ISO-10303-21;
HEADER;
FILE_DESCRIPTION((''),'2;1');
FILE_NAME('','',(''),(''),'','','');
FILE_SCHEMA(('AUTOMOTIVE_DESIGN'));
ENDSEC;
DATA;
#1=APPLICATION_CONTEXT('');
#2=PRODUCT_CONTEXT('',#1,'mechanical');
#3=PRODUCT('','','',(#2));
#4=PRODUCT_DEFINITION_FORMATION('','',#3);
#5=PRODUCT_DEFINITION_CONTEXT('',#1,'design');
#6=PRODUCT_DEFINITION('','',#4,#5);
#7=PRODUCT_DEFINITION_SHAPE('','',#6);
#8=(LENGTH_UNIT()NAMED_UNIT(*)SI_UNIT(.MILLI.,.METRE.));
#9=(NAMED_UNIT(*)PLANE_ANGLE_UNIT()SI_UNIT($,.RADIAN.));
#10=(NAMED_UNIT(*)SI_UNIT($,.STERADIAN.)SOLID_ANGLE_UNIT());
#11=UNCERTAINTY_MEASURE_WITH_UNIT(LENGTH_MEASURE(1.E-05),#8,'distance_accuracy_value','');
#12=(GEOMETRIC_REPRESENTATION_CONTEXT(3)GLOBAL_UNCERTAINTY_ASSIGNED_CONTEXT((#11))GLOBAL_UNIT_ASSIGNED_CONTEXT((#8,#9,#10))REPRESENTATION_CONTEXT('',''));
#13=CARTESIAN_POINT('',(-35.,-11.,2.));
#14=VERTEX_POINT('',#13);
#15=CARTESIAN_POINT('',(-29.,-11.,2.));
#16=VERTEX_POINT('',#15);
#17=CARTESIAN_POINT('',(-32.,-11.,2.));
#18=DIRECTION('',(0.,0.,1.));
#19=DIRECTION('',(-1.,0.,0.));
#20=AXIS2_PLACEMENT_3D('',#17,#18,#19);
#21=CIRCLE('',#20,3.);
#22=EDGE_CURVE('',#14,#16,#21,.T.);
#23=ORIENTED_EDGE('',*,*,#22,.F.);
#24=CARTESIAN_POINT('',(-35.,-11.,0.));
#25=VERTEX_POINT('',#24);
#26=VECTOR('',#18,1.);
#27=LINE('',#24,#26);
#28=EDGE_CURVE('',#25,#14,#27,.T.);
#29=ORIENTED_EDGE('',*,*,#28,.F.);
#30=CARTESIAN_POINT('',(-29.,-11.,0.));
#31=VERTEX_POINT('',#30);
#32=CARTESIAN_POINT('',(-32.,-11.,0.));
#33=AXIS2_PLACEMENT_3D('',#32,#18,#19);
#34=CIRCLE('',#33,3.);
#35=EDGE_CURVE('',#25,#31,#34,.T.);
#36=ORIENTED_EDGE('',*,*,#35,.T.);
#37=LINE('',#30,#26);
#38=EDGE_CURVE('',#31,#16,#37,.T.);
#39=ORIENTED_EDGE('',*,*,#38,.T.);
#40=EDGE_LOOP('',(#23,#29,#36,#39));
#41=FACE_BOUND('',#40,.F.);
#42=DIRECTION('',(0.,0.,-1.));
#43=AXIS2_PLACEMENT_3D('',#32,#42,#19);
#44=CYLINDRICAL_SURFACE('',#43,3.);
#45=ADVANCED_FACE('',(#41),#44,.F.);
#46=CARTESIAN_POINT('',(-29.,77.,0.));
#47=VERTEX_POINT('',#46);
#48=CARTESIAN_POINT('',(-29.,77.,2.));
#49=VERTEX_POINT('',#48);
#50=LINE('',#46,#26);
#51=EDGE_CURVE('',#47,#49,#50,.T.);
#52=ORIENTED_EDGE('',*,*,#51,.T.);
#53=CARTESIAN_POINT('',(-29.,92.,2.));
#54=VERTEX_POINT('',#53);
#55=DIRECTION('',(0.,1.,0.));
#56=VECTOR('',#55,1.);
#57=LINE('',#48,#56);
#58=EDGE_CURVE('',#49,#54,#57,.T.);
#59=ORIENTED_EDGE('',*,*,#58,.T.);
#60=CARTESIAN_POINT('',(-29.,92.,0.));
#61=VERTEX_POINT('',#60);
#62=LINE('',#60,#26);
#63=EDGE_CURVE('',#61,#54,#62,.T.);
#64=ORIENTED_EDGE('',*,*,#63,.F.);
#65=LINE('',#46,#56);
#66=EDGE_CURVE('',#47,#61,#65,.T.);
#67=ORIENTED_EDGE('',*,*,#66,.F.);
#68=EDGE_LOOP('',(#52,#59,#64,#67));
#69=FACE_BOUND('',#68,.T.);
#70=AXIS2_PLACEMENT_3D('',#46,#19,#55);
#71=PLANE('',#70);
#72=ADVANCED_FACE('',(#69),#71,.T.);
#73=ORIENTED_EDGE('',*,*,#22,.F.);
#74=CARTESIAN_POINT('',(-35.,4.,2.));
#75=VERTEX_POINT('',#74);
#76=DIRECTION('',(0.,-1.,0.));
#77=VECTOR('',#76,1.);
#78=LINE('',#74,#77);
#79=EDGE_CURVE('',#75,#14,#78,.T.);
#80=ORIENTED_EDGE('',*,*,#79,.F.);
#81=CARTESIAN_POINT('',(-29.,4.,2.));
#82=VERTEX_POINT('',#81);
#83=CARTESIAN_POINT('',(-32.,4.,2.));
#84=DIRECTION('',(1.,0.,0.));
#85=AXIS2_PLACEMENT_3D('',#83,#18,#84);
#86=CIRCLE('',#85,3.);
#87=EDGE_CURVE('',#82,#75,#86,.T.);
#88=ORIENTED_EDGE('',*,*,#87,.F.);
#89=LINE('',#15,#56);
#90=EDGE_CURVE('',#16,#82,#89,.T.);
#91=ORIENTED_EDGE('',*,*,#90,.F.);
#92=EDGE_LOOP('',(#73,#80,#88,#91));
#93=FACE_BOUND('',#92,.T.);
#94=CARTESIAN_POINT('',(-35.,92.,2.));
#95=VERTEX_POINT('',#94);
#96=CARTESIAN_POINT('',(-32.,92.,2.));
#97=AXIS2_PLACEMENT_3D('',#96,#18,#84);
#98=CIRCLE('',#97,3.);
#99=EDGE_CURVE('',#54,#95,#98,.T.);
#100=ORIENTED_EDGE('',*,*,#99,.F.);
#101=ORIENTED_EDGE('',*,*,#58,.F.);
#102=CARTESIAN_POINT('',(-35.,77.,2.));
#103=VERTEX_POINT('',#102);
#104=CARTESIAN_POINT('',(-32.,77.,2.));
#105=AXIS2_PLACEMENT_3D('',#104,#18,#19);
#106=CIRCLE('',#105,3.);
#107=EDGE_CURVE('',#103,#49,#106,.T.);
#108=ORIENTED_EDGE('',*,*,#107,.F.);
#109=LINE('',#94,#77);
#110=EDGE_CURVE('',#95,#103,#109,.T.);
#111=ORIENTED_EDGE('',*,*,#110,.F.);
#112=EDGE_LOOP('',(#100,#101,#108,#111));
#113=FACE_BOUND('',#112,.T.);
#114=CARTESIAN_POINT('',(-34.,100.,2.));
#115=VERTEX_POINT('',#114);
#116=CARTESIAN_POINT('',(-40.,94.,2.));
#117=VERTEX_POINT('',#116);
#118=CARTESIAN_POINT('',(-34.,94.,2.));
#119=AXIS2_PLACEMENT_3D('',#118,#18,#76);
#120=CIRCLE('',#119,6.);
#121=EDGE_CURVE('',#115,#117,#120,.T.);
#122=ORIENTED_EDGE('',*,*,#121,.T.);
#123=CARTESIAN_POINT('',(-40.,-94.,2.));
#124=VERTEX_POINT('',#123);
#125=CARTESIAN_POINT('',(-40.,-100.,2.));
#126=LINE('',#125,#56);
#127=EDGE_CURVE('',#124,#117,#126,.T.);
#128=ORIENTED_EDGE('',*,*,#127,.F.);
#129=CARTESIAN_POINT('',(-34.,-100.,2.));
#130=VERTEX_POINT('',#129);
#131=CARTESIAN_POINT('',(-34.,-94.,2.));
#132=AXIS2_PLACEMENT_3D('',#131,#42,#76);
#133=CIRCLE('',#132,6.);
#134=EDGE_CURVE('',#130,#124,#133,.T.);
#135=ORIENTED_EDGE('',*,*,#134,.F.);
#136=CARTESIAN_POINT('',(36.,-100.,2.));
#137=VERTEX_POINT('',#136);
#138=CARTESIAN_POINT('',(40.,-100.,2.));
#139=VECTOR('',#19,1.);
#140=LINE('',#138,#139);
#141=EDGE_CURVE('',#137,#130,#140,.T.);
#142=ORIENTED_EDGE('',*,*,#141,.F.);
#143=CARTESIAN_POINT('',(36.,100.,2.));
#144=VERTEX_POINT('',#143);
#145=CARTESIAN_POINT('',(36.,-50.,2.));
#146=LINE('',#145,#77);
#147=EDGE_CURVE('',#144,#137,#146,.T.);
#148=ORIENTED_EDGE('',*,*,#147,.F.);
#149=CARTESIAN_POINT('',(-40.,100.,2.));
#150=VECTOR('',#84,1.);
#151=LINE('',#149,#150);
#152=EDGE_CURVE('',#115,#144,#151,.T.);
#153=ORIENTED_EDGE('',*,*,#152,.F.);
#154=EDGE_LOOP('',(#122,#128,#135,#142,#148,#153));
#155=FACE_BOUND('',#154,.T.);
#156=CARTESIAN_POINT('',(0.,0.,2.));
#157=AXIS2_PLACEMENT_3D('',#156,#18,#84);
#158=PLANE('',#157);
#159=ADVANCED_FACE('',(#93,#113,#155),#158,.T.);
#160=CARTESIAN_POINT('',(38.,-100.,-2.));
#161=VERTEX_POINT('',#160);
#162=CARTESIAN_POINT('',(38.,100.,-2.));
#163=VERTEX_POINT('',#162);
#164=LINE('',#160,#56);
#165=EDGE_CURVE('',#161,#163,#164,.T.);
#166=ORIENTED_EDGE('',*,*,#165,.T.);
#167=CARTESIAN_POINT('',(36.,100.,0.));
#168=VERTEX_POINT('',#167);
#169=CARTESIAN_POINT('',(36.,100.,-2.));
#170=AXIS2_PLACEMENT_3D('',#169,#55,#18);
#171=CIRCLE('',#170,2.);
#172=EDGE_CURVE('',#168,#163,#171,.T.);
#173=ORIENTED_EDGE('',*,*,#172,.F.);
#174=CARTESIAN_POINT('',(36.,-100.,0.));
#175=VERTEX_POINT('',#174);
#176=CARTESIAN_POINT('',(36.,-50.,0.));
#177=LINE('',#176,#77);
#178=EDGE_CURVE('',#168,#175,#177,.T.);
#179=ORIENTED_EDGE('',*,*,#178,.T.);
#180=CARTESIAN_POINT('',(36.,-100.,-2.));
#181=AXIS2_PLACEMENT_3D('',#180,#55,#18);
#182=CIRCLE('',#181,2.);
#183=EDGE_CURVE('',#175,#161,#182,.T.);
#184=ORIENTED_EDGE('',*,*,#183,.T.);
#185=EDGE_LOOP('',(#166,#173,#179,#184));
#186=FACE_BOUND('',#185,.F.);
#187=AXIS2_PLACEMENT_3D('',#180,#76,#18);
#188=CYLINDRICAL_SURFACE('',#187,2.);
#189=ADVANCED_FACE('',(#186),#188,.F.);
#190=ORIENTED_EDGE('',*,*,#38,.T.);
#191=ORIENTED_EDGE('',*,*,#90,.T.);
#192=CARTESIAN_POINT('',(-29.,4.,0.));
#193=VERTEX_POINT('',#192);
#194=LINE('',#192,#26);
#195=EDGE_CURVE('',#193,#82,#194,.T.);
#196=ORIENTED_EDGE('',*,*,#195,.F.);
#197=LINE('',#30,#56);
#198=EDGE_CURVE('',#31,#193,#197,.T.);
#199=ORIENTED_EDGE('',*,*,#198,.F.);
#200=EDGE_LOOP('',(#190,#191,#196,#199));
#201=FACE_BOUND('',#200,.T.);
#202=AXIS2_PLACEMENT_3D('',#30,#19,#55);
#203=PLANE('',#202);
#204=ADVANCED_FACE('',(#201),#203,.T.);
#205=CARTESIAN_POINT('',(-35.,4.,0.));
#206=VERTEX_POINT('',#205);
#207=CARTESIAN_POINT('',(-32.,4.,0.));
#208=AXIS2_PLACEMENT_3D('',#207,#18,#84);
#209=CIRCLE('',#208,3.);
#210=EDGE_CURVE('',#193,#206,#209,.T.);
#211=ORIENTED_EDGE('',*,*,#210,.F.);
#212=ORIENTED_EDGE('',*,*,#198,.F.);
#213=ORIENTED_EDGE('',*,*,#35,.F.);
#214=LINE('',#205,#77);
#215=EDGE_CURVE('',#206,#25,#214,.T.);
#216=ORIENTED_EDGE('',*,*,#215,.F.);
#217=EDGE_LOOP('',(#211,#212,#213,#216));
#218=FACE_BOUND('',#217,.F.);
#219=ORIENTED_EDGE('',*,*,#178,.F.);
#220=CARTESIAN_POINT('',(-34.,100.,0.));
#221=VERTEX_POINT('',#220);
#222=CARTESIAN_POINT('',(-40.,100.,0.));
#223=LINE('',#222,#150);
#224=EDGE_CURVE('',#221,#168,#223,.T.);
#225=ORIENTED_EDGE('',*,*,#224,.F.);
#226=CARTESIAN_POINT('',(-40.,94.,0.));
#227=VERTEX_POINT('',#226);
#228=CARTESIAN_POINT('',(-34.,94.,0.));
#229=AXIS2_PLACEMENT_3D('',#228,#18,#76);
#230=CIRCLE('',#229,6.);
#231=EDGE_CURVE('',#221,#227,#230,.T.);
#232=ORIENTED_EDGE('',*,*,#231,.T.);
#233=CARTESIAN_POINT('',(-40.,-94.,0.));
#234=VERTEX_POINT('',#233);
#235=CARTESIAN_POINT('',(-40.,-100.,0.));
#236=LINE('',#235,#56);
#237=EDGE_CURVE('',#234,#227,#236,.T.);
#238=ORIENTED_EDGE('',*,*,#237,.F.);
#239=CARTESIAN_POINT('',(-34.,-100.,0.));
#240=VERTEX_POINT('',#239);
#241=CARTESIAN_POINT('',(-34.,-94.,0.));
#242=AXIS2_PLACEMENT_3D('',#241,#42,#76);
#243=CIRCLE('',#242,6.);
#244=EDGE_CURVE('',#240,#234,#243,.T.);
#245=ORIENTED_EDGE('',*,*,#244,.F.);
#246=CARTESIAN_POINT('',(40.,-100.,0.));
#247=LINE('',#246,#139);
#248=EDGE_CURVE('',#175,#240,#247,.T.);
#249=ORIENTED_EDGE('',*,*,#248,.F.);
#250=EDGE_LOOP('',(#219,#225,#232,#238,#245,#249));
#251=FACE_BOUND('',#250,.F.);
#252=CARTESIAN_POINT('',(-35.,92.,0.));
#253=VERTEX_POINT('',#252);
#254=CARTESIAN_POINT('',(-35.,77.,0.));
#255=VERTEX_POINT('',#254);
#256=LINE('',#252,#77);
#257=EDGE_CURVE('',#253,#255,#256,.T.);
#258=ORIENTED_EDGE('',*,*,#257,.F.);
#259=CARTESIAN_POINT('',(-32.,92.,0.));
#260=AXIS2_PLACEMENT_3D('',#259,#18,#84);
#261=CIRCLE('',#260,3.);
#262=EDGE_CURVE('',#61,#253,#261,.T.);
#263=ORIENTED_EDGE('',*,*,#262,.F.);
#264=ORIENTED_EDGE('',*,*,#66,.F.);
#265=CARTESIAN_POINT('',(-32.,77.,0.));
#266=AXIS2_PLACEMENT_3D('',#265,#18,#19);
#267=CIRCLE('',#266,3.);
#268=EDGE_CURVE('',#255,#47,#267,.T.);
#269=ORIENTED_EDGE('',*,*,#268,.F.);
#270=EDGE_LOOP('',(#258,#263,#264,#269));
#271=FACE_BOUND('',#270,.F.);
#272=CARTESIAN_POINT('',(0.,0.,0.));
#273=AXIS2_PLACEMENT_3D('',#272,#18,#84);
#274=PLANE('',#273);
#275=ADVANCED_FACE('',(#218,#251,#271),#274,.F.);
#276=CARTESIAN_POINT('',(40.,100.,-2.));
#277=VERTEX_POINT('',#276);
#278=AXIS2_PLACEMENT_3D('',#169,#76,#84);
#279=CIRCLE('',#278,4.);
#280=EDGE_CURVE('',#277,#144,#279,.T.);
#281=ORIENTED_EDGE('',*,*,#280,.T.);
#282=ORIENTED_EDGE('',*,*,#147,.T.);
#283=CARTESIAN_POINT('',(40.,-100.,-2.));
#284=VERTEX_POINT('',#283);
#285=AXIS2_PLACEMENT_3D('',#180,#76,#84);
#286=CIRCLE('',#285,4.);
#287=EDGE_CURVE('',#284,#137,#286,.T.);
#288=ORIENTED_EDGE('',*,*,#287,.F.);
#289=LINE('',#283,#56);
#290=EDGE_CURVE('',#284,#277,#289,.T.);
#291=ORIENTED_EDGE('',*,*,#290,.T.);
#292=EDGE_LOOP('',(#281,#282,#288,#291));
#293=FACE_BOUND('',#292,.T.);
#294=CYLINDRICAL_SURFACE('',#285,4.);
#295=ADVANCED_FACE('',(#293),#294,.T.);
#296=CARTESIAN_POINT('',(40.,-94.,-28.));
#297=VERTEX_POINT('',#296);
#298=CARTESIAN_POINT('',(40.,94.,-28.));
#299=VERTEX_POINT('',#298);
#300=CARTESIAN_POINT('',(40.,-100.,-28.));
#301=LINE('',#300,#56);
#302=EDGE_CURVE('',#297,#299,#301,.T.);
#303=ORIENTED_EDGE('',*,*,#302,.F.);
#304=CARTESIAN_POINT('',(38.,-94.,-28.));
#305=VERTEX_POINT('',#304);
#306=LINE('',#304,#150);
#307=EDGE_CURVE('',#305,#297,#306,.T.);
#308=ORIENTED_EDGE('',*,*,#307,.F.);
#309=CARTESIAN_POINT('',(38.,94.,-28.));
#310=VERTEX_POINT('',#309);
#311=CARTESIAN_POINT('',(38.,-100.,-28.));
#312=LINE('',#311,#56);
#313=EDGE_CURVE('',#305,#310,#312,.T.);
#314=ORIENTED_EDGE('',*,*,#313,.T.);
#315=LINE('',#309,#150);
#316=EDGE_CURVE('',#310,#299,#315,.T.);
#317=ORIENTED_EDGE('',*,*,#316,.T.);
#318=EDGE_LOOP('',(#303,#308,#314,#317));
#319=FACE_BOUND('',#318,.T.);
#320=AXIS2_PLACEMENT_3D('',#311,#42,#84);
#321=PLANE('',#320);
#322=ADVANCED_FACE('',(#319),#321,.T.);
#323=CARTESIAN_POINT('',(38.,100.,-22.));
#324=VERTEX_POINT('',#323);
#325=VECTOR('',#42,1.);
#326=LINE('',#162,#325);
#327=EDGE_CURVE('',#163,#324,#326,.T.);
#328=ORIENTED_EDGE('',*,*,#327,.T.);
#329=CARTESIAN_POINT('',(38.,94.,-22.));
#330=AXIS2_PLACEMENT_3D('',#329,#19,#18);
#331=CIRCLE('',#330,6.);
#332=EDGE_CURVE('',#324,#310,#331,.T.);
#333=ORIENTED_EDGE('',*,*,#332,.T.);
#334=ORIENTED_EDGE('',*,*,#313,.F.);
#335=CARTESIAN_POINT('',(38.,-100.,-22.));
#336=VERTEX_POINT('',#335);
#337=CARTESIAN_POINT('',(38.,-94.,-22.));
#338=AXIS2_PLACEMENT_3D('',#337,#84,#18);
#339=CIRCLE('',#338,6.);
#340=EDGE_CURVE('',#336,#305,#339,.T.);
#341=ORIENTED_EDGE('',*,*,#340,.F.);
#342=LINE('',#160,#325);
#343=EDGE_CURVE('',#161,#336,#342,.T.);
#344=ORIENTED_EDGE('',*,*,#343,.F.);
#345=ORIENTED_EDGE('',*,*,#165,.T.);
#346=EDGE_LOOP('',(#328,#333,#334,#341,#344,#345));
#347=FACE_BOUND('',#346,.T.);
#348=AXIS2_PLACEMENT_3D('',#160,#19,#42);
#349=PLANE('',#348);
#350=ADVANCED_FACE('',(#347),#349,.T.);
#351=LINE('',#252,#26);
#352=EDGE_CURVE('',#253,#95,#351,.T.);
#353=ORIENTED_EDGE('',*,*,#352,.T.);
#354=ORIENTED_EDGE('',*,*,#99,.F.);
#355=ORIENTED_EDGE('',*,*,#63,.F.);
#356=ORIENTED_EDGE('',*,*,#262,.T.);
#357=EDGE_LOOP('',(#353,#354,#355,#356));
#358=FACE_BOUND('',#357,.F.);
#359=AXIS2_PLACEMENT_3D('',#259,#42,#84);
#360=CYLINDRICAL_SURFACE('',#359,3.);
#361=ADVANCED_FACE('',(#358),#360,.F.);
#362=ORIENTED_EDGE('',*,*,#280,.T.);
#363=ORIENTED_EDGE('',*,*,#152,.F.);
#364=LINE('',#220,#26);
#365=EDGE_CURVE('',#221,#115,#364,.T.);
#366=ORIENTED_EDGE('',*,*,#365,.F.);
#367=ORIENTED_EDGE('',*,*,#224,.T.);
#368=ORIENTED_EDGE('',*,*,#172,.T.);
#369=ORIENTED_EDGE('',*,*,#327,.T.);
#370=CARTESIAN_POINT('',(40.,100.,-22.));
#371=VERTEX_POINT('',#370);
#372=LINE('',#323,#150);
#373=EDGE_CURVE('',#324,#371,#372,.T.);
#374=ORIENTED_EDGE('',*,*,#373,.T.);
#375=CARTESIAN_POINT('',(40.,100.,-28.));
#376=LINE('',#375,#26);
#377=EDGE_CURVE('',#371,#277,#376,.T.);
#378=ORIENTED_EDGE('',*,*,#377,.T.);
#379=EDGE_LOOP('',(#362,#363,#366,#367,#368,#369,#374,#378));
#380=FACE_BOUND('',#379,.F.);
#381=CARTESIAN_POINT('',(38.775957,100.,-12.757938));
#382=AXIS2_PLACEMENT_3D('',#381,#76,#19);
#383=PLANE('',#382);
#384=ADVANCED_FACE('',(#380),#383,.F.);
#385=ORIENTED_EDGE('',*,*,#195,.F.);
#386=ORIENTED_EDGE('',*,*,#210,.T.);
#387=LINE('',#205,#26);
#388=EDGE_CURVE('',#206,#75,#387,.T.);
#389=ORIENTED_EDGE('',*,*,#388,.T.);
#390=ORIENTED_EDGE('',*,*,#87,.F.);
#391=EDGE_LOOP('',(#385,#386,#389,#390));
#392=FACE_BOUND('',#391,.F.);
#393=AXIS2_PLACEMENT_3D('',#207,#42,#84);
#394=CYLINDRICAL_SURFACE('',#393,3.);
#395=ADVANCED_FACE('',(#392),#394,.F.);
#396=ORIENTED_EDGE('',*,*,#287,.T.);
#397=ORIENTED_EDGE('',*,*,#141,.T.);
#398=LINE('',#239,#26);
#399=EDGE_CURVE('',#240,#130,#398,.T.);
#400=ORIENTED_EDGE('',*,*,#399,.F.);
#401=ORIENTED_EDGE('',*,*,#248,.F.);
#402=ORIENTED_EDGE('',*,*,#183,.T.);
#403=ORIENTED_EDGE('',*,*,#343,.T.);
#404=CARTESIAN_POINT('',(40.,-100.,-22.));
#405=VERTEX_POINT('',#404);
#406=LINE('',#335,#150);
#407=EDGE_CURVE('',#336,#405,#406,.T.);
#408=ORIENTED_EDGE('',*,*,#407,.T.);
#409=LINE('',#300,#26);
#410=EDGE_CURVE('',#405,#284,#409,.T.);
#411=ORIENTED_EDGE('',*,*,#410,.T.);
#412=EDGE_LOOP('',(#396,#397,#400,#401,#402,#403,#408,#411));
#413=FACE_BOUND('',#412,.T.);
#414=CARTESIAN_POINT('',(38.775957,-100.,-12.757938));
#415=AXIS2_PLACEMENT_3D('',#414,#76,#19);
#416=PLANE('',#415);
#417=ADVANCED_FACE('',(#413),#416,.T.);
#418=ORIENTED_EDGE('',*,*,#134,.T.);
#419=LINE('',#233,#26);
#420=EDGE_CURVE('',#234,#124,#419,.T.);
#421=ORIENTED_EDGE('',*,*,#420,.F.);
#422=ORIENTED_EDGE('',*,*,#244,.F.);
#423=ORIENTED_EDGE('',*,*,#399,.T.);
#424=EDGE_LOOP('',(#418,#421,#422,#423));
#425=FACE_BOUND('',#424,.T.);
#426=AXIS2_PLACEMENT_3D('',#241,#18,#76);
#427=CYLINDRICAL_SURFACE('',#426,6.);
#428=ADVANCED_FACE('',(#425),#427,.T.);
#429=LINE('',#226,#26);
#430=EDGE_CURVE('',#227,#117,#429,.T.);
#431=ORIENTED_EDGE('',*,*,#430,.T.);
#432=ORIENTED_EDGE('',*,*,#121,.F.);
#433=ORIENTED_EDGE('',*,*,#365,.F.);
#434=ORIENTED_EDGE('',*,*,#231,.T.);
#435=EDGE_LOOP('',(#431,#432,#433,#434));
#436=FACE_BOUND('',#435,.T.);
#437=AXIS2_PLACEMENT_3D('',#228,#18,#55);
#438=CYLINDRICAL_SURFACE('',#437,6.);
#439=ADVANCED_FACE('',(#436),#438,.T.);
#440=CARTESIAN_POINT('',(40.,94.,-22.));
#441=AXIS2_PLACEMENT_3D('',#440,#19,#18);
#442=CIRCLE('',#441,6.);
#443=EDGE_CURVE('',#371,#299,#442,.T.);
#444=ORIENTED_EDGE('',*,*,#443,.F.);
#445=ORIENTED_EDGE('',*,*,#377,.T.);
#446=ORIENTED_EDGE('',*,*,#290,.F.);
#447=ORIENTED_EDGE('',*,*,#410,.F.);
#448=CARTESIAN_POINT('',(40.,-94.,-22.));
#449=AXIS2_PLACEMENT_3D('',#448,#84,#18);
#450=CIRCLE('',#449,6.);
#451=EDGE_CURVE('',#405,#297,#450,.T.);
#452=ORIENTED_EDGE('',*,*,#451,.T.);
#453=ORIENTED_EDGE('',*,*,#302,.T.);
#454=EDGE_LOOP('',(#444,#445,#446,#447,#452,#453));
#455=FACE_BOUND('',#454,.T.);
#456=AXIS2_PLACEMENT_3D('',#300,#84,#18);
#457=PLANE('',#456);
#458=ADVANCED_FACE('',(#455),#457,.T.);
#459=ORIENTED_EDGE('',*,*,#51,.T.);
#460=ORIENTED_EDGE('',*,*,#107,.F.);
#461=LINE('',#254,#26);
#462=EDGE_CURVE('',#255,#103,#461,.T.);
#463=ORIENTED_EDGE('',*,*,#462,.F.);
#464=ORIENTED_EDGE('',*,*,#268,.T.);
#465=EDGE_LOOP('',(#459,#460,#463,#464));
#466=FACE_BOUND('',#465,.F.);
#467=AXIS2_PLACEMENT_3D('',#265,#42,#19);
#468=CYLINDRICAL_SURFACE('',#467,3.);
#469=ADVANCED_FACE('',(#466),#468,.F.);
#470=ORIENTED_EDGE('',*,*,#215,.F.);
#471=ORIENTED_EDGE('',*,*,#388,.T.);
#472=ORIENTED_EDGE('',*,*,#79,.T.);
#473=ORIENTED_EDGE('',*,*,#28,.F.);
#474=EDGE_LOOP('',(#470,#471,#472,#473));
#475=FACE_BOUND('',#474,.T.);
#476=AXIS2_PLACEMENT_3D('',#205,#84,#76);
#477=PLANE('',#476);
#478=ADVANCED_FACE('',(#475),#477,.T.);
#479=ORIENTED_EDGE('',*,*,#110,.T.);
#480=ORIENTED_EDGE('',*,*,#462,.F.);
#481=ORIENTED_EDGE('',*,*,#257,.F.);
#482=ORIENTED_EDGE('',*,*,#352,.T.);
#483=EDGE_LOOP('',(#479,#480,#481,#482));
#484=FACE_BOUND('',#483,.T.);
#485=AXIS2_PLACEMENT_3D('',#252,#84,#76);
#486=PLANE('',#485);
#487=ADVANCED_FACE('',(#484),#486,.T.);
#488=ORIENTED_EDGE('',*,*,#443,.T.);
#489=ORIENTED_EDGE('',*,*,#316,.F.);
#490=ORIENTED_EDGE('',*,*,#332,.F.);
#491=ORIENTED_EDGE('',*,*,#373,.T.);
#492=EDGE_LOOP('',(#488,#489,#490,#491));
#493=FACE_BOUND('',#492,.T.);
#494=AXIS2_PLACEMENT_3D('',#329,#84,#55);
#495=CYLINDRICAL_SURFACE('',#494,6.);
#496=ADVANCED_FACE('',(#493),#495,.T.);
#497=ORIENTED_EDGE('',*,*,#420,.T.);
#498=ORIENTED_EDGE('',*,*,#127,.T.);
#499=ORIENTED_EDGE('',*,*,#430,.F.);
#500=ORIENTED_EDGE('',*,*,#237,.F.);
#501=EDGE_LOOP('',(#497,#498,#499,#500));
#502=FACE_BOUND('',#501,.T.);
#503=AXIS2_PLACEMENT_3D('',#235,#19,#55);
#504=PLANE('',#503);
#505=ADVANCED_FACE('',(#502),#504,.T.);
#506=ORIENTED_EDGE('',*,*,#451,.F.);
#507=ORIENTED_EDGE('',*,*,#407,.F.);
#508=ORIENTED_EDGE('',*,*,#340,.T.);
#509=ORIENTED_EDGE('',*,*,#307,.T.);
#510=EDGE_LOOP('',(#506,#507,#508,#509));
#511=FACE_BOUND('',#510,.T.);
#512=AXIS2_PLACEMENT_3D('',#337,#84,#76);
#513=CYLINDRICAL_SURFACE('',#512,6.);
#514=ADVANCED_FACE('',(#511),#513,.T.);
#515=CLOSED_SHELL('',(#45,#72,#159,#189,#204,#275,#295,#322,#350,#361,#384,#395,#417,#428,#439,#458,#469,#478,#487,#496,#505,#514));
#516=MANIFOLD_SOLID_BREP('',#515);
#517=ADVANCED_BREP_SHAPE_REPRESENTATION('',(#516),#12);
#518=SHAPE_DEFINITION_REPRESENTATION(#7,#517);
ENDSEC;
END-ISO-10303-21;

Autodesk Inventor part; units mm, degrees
ref_plane "YZ Plane" through (0, 0, 0) normal (1, 0, 0) x (0, 1, 0)
ref_plane "XZ Plane" through (0, 0, 0) normal (0, 1, 0) x (-1, 0, 0)
ref_plane "XY Plane" through (0, 0, 0) normal (0, 0, 1) x (1, 0, 0)
sketch "Sketch1" plane through (0, 0, 0) normal (0, 0, 1) x (1, 0, 0)
  line L0 (40, -100) -> (-40, -100)
  line L1 (-40, -100) -> (-40, 100)
  line L2 (-40, 100) -> (40, 100)
  line L3 (40, 100) -> (40, -100)
  line L4 (40, 100) -> (-40, -100) construction
  point P0 (0, 0)
  point P1 (0, 0)
  dimension "d1" = 200
  dimension "d2" = 80
extrude "Plate1" add sketch "Sketch1" along normal blind 2
sketch "Sketch5" plane through (0, 0, 0) normal (0, 0, 1) x (1, 0, 0)
  circle A0 centre (-32, 92) radius 3
  circle A1 centre (-32, 4) radius 3
  line L0 (-40, -100) -> (-40, 100) projected
  line L1 (40, -100) -> (-40, -100) projected
  line L2 (40, 100) -> (40, -100) projected
  line L3 (-40, 100) -> (40, 100) projected
  line L4 (-32, 92) -> (-32, 77) construction
  line L5 (-35, 92) -> (-35, 77)
  line L6 (-29, 77) -> (-29, 92)
  arc A2 (-29, 92) -> (-35, 92) centre (-32, 92) ccw
  arc A3 (-35, 77) -> (-29, 77) centre (-32, 77) ccw
  line L7 (-32, 4) -> (-32, -11) construction
  line L8 (-35, 4) -> (-35, -11)
  line L9 (-29, -11) -> (-29, 4)
  arc A4 (-29, 4) -> (-35, 4) centre (-32, 4) ccw
  arc A5 (-35, -11) -> (-29, -11) centre (-32, -11) ccw
  point P0 (0, 0)
  point P1 (-32, 84.5)
  point P2 (-32, -3.5)
  point P3 (-29, 4)
  dimension "d33" = 88
  dimension "d34" = 6
  dimension "d35" = 8
  dimension "d36" = 8
  dimension "d50" = 15
extrude "Cut1" cut sketch "Sketch5" along normal blind 2 contours A0 | L6 A3 L5 A0 | A1 | L9 A5 L8 A1
sketch "Sketch6" plane through (38, 100, 2) normal (1, 0, 0) x (0, 1, 0)
  line L0 (-200, 0) -> (0, 0)
  line L1 (0, 0) -> (0, 30)
  line L2 (0, 30) -> (-200, 30)
  line L3 (-200, 30) -> (-200, 0)
edge flange "Flange2" height 30 angle 90 thickness 2 bend radius 2 thickness toward (1, 0, 0) relief tear relief width 2 relief depth 1 edges at (40, 0, 2) wall of the first edge with corners at (38, -100, 2) (38, 100, 2) (38, 100, -28) (38, -100, -28)
bend "Bend2"
corner "Corner2"
fillet "Corner Round1" radius 6 4 edges at (-40, 100, 1) (39, -100, -28) (39, 100, -28) (-40, -100, 1)
equation "\"d36\" = d35"
equation "\"d37\" = Thickness"
equation "\"d0\" = Thickness"
equation "\"d39\" = BendReliefWidth"
equation "\"d40\" = BendReliefDepth"
equation "\"d41\" = MinimumRemnant"
equation "\"d42\" = TransitionRadius"
equation "\"d45\" = BendRadius"
equation "\"d46\" = CornerReliefSize"
equation "\"d47\" = GapSize"
equation "\"d48\" = JacobiRadiusSize"
equation "\"BendRadius\" = Thickness"
equation "\"BendReliefWidth\" = Thickness"
equation "\"BendReliefDepth\" = 0.5 * Thickness"
equation "\"CornerReliefSize\" = 4 * Thickness"
equation "\"MinimumRemnant\" = 2 * Thickness"
equation "\"TransitionRadius\" = BendRadius"
equation "\"JacobiRadiusSize\" = BendRadius"
equation "\"GapSize\" = Thickness"
equation "\"Thickness\" = 2"
properties part number "GNH 017  Pulse compensator" material "Stainless Steel"
